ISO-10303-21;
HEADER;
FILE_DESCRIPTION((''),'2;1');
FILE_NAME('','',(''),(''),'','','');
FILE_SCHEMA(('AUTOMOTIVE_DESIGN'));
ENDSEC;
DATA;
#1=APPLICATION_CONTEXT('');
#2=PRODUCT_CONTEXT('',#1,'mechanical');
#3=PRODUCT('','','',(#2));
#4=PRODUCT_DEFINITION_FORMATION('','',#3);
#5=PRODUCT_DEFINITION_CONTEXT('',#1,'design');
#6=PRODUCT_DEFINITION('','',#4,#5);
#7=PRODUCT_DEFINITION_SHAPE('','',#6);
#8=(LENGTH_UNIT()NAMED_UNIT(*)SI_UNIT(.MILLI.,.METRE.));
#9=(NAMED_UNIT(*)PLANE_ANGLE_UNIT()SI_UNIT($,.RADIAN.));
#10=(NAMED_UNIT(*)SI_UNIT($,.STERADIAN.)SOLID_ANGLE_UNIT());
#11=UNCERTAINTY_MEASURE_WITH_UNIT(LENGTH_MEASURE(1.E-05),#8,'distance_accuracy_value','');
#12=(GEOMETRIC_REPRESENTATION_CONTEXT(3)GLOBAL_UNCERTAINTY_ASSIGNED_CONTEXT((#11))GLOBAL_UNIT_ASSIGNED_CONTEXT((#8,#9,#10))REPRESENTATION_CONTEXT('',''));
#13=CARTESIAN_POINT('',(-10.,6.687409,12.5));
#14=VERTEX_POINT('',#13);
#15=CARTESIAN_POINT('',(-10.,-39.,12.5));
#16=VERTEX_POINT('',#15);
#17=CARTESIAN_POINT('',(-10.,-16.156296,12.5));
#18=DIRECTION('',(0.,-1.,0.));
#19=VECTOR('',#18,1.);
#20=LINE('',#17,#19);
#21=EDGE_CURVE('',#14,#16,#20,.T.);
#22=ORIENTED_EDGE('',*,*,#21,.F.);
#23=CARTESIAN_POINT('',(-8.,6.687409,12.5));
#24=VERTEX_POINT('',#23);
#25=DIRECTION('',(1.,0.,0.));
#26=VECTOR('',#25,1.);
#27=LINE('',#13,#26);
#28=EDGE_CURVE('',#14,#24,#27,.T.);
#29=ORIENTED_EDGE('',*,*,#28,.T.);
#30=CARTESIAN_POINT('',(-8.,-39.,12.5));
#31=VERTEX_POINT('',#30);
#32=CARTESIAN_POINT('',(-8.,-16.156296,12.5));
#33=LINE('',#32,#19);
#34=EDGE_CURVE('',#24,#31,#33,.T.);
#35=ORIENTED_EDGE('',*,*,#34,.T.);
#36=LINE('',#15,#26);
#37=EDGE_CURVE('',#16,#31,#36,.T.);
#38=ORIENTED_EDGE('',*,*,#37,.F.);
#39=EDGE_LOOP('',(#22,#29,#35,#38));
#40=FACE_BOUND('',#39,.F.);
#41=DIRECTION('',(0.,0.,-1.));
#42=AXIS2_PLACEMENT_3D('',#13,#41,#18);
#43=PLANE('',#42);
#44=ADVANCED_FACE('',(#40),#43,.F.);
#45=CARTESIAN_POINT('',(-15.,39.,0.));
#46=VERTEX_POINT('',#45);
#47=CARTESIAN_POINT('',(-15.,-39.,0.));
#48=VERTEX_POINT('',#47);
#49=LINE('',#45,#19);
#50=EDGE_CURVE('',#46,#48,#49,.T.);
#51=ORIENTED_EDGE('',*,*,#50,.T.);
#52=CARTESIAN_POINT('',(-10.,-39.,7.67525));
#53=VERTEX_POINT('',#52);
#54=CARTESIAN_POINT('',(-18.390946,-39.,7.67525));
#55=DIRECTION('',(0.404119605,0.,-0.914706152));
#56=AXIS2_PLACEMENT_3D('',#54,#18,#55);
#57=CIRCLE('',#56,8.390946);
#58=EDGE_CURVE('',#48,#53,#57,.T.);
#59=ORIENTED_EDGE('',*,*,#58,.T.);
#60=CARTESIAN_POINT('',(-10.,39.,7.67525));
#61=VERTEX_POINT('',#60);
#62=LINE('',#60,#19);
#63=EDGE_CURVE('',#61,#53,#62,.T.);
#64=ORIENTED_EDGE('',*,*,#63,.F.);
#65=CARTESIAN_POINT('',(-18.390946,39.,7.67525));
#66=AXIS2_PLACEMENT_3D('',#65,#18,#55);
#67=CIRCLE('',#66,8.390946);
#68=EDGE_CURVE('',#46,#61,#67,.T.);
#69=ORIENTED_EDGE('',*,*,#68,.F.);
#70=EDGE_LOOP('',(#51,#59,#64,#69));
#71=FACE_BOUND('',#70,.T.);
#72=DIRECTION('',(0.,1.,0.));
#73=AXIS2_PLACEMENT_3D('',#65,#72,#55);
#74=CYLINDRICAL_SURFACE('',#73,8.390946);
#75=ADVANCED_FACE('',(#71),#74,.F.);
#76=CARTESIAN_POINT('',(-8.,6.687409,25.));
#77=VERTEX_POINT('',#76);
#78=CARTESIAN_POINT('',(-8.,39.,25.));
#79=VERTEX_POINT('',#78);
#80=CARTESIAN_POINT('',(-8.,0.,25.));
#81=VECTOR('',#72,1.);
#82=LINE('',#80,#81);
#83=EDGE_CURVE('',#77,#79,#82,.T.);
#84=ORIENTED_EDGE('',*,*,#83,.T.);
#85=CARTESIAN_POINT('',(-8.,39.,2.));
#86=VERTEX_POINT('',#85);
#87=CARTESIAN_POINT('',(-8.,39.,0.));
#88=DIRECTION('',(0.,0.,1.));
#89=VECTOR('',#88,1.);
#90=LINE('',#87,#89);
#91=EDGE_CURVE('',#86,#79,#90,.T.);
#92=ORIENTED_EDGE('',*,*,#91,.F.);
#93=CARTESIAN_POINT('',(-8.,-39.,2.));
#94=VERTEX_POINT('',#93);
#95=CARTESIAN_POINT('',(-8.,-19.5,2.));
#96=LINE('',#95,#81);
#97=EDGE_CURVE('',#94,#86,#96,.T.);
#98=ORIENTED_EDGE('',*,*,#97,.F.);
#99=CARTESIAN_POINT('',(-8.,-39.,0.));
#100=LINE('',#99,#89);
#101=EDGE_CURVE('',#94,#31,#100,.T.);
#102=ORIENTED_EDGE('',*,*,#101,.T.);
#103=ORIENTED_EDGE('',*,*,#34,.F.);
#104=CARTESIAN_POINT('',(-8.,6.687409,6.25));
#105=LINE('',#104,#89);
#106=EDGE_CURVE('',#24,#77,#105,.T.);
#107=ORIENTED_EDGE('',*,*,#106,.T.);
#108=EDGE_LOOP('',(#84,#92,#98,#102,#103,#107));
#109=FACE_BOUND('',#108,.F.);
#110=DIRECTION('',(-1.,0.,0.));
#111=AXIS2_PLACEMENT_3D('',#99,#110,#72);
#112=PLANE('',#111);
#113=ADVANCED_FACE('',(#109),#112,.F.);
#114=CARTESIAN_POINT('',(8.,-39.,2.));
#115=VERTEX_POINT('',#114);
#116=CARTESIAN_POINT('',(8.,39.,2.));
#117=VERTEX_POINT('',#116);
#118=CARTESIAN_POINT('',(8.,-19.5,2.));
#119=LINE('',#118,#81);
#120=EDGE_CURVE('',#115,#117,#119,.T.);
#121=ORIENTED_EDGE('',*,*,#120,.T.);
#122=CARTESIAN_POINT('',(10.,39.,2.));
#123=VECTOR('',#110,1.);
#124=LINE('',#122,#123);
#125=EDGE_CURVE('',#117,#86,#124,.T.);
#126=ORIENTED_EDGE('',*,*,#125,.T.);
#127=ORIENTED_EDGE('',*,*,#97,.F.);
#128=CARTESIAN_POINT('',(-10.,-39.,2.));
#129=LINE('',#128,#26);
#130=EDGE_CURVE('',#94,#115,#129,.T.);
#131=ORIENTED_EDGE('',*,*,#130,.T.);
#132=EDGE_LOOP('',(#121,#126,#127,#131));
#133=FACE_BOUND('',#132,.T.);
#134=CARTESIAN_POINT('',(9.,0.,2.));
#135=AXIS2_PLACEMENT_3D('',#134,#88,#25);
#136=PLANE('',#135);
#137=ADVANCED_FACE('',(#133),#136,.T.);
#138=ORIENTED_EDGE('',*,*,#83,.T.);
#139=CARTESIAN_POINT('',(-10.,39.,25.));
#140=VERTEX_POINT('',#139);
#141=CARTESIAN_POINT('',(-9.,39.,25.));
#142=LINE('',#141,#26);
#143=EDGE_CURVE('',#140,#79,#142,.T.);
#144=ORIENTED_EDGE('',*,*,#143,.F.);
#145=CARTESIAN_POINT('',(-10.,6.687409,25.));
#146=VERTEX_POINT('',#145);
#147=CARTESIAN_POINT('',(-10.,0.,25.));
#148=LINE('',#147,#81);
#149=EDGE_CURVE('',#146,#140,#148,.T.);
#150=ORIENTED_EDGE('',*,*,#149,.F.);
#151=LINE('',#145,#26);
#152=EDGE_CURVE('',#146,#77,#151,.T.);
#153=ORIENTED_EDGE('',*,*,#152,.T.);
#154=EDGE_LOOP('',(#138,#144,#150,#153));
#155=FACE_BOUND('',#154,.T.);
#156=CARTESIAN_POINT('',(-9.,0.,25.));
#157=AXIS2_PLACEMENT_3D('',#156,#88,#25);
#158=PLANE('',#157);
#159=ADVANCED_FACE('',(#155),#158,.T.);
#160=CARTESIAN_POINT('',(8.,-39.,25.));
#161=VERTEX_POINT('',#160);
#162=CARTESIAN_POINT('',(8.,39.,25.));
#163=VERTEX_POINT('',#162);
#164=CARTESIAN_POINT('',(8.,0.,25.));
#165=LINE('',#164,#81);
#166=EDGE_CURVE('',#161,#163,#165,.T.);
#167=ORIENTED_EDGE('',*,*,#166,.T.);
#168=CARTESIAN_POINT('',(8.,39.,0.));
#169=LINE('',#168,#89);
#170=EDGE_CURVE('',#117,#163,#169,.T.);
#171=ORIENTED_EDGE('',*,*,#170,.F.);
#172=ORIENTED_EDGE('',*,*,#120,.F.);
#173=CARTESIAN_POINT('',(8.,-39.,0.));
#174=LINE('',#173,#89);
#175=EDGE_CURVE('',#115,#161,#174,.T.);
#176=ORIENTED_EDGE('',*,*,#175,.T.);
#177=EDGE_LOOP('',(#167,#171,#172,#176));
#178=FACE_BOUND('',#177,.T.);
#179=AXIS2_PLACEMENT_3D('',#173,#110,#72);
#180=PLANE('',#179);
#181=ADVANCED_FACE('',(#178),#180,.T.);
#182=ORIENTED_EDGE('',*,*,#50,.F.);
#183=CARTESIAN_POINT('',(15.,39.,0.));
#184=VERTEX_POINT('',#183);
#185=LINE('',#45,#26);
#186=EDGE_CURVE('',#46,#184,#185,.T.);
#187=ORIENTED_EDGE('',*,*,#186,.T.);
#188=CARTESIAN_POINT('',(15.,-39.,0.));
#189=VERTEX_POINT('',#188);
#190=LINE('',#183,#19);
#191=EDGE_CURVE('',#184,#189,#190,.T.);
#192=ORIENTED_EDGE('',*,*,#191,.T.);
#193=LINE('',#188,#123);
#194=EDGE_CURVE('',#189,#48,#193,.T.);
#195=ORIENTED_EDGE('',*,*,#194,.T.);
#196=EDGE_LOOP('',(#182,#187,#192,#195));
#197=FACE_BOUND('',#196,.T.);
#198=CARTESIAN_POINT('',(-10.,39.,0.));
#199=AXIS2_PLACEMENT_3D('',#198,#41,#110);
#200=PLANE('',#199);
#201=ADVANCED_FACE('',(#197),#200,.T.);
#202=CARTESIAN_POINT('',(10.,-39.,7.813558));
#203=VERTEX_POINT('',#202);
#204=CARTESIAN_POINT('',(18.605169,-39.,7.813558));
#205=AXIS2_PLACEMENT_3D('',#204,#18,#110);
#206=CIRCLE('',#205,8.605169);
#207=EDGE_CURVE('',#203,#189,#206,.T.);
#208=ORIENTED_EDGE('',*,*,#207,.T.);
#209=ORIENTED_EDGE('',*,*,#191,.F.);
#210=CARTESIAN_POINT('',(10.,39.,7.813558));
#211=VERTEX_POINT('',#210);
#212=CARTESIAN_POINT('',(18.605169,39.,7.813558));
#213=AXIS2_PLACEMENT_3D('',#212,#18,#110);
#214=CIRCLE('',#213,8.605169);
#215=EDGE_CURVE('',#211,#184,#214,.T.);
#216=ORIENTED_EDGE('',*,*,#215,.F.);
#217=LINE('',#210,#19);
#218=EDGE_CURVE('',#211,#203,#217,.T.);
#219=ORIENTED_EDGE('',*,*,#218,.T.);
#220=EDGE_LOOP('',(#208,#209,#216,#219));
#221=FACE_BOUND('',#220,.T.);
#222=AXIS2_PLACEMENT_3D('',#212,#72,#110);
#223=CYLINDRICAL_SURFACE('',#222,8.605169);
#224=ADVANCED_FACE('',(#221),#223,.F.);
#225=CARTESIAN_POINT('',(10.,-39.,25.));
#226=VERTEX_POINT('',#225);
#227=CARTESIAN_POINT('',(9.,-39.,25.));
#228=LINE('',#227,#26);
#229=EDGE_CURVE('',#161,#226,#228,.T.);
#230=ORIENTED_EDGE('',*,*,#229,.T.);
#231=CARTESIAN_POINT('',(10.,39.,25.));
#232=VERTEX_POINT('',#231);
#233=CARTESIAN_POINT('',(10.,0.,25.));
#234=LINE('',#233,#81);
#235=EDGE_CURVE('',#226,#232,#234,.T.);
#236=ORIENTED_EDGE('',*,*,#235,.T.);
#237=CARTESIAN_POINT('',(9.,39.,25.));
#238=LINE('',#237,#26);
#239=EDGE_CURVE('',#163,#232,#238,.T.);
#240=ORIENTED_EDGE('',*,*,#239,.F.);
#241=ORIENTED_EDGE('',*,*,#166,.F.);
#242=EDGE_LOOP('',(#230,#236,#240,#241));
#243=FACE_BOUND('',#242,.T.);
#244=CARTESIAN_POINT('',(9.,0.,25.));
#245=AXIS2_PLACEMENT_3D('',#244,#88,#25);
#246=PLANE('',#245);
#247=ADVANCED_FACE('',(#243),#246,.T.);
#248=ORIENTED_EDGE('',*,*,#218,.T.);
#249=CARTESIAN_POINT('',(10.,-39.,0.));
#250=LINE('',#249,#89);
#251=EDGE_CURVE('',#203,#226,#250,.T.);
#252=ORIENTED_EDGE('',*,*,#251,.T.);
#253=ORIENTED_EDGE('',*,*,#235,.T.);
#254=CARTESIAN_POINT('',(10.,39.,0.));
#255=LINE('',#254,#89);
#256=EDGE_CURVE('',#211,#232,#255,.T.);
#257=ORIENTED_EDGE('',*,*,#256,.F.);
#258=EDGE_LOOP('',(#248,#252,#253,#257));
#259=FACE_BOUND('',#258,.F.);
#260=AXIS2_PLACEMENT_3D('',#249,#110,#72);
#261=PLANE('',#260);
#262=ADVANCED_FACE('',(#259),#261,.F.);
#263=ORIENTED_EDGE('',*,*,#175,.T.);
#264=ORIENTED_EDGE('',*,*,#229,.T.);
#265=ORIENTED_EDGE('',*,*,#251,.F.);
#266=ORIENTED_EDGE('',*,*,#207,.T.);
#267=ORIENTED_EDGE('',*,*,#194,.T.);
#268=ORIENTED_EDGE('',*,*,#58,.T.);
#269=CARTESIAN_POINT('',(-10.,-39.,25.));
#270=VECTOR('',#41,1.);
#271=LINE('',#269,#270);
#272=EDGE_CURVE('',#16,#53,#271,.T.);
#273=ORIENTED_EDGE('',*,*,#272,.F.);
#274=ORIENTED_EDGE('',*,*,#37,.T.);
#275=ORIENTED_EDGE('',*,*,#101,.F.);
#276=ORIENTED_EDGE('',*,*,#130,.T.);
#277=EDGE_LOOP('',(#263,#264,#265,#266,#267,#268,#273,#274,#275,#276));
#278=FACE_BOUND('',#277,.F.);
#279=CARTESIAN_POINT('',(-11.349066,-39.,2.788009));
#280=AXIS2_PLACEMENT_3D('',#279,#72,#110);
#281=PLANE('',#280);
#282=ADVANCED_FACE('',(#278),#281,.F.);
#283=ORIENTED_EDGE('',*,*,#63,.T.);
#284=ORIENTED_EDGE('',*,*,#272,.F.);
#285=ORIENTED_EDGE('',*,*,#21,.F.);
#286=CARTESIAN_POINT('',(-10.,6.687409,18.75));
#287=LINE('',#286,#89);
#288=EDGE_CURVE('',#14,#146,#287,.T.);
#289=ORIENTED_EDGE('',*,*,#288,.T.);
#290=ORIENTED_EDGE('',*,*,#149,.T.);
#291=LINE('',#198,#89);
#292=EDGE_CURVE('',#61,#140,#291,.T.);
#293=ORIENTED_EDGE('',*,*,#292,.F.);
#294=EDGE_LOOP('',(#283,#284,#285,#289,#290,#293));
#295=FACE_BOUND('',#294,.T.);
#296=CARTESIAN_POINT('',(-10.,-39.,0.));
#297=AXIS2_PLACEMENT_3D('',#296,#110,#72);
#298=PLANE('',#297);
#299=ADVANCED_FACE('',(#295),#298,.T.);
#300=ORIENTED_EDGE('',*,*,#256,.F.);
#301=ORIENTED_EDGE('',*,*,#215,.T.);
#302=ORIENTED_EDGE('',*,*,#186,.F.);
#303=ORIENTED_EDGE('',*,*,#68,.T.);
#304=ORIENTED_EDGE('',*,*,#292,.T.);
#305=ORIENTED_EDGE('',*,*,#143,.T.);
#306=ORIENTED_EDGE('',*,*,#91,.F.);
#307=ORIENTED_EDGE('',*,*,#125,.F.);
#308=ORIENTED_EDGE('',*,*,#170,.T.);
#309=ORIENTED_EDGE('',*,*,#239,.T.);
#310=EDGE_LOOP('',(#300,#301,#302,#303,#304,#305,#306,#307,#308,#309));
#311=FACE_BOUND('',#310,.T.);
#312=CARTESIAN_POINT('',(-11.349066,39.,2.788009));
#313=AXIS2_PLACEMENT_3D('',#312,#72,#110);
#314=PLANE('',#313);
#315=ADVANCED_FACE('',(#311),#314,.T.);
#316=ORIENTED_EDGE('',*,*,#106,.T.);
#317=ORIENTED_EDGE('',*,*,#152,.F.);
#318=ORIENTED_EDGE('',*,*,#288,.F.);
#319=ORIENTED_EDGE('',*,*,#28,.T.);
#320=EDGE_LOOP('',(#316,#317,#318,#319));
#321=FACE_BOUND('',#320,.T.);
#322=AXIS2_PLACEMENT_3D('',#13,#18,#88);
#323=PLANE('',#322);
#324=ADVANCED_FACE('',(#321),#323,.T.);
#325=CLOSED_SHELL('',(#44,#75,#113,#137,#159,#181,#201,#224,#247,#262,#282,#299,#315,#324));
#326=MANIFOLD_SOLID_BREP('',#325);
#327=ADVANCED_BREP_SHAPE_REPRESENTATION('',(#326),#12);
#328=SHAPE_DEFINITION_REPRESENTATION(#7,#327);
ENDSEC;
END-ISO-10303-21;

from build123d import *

# Parameters (mm, degrees)
F0_W     = 2
F0_H     = 78
F1_DEPTH = 25
F0_W_2   = 16
F2_DEPTH = 2
F3_W     = 45.6874087788
F3_H     = 12.5
F4_DEPTH = 10
F7_DEPTH = 78
F8_DEPTH = 78


# Not quite as in the source:
# - a feature names something its author has since deleted; it is built from what else it names


with BuildPart() as f1:
    # F0 (on Top) → F1 (new body)
    with BuildSketch(Plane.XY):
        with Locations((9, 0)):
            Rectangle(F0_W, F0_H)
    extrude(amount=F1_DEPTH)



with BuildPart() as f1b:
    # F0 (on Top) → F1, piece 2 (new body)
    with BuildSketch(Plane.XY):
        with Locations((-9, 0)):
            Rectangle(F0_W, F0_H)
    extrude(amount=F1_DEPTH)


with BuildPart() as f1_1:
    add(f1.part)

    add(f1b.part)  # F2 merges F1b
    # F0 (on Top) → F2 (join)
    with BuildSketch(Plane.XY):
        with Locations((9, 0)):
            Rectangle(F0_W, F0_H)
        Rectangle(F0_W_2, F0_H)
        with Locations((-9, 0)):
            Rectangle(F0_W, F0_H)
    extrude(amount=F2_DEPTH)

    # F3 (on face) → F4 (cut)
    with BuildSketch(Plane(origin=(-10, 0, 0), x_dir=(0, -1, 0), z_dir=(-1, 0, 0))):
        with Locations((16.1562956106, 18.75)):
            Rectangle(F3_W, F3_H)
    extrude(amount=-F4_DEPTH, mode=Mode.SUBTRACT)

    # F6 (on face) → F7 (join)
    with BuildSketch(Plane(origin=(0, 39, 0), x_dir=(-1, 0, 0), z_dir=(0, 1, 0))):
        with BuildLine():
            ThreePointArc((-10, 7.8135579824), (-11.356996059, 3.1753555196), (-15, 0))
            Line((-15, 0), (-10, 0))
            Line((-10, 0), (-10, 7.8135579824))
        make_face()
    extrude(amount=-F7_DEPTH)

    # F5 (on face) → F8 (join)
    with BuildSketch(Plane(origin=(0, 39, 0), x_dir=(-1, 0, 0), z_dir=(0, 1, 0))):
        with BuildLine():
            Line((10, 0), (15, 0))
            ThreePointArc((15, 0), (11.360255444, 3.0951443467), (10, 7.6752495952))
            Line((10, 7.6752495952), (10, 0))
        make_face()
    extrude(amount=-F8_DEPTH)


solid = f1_1.part
